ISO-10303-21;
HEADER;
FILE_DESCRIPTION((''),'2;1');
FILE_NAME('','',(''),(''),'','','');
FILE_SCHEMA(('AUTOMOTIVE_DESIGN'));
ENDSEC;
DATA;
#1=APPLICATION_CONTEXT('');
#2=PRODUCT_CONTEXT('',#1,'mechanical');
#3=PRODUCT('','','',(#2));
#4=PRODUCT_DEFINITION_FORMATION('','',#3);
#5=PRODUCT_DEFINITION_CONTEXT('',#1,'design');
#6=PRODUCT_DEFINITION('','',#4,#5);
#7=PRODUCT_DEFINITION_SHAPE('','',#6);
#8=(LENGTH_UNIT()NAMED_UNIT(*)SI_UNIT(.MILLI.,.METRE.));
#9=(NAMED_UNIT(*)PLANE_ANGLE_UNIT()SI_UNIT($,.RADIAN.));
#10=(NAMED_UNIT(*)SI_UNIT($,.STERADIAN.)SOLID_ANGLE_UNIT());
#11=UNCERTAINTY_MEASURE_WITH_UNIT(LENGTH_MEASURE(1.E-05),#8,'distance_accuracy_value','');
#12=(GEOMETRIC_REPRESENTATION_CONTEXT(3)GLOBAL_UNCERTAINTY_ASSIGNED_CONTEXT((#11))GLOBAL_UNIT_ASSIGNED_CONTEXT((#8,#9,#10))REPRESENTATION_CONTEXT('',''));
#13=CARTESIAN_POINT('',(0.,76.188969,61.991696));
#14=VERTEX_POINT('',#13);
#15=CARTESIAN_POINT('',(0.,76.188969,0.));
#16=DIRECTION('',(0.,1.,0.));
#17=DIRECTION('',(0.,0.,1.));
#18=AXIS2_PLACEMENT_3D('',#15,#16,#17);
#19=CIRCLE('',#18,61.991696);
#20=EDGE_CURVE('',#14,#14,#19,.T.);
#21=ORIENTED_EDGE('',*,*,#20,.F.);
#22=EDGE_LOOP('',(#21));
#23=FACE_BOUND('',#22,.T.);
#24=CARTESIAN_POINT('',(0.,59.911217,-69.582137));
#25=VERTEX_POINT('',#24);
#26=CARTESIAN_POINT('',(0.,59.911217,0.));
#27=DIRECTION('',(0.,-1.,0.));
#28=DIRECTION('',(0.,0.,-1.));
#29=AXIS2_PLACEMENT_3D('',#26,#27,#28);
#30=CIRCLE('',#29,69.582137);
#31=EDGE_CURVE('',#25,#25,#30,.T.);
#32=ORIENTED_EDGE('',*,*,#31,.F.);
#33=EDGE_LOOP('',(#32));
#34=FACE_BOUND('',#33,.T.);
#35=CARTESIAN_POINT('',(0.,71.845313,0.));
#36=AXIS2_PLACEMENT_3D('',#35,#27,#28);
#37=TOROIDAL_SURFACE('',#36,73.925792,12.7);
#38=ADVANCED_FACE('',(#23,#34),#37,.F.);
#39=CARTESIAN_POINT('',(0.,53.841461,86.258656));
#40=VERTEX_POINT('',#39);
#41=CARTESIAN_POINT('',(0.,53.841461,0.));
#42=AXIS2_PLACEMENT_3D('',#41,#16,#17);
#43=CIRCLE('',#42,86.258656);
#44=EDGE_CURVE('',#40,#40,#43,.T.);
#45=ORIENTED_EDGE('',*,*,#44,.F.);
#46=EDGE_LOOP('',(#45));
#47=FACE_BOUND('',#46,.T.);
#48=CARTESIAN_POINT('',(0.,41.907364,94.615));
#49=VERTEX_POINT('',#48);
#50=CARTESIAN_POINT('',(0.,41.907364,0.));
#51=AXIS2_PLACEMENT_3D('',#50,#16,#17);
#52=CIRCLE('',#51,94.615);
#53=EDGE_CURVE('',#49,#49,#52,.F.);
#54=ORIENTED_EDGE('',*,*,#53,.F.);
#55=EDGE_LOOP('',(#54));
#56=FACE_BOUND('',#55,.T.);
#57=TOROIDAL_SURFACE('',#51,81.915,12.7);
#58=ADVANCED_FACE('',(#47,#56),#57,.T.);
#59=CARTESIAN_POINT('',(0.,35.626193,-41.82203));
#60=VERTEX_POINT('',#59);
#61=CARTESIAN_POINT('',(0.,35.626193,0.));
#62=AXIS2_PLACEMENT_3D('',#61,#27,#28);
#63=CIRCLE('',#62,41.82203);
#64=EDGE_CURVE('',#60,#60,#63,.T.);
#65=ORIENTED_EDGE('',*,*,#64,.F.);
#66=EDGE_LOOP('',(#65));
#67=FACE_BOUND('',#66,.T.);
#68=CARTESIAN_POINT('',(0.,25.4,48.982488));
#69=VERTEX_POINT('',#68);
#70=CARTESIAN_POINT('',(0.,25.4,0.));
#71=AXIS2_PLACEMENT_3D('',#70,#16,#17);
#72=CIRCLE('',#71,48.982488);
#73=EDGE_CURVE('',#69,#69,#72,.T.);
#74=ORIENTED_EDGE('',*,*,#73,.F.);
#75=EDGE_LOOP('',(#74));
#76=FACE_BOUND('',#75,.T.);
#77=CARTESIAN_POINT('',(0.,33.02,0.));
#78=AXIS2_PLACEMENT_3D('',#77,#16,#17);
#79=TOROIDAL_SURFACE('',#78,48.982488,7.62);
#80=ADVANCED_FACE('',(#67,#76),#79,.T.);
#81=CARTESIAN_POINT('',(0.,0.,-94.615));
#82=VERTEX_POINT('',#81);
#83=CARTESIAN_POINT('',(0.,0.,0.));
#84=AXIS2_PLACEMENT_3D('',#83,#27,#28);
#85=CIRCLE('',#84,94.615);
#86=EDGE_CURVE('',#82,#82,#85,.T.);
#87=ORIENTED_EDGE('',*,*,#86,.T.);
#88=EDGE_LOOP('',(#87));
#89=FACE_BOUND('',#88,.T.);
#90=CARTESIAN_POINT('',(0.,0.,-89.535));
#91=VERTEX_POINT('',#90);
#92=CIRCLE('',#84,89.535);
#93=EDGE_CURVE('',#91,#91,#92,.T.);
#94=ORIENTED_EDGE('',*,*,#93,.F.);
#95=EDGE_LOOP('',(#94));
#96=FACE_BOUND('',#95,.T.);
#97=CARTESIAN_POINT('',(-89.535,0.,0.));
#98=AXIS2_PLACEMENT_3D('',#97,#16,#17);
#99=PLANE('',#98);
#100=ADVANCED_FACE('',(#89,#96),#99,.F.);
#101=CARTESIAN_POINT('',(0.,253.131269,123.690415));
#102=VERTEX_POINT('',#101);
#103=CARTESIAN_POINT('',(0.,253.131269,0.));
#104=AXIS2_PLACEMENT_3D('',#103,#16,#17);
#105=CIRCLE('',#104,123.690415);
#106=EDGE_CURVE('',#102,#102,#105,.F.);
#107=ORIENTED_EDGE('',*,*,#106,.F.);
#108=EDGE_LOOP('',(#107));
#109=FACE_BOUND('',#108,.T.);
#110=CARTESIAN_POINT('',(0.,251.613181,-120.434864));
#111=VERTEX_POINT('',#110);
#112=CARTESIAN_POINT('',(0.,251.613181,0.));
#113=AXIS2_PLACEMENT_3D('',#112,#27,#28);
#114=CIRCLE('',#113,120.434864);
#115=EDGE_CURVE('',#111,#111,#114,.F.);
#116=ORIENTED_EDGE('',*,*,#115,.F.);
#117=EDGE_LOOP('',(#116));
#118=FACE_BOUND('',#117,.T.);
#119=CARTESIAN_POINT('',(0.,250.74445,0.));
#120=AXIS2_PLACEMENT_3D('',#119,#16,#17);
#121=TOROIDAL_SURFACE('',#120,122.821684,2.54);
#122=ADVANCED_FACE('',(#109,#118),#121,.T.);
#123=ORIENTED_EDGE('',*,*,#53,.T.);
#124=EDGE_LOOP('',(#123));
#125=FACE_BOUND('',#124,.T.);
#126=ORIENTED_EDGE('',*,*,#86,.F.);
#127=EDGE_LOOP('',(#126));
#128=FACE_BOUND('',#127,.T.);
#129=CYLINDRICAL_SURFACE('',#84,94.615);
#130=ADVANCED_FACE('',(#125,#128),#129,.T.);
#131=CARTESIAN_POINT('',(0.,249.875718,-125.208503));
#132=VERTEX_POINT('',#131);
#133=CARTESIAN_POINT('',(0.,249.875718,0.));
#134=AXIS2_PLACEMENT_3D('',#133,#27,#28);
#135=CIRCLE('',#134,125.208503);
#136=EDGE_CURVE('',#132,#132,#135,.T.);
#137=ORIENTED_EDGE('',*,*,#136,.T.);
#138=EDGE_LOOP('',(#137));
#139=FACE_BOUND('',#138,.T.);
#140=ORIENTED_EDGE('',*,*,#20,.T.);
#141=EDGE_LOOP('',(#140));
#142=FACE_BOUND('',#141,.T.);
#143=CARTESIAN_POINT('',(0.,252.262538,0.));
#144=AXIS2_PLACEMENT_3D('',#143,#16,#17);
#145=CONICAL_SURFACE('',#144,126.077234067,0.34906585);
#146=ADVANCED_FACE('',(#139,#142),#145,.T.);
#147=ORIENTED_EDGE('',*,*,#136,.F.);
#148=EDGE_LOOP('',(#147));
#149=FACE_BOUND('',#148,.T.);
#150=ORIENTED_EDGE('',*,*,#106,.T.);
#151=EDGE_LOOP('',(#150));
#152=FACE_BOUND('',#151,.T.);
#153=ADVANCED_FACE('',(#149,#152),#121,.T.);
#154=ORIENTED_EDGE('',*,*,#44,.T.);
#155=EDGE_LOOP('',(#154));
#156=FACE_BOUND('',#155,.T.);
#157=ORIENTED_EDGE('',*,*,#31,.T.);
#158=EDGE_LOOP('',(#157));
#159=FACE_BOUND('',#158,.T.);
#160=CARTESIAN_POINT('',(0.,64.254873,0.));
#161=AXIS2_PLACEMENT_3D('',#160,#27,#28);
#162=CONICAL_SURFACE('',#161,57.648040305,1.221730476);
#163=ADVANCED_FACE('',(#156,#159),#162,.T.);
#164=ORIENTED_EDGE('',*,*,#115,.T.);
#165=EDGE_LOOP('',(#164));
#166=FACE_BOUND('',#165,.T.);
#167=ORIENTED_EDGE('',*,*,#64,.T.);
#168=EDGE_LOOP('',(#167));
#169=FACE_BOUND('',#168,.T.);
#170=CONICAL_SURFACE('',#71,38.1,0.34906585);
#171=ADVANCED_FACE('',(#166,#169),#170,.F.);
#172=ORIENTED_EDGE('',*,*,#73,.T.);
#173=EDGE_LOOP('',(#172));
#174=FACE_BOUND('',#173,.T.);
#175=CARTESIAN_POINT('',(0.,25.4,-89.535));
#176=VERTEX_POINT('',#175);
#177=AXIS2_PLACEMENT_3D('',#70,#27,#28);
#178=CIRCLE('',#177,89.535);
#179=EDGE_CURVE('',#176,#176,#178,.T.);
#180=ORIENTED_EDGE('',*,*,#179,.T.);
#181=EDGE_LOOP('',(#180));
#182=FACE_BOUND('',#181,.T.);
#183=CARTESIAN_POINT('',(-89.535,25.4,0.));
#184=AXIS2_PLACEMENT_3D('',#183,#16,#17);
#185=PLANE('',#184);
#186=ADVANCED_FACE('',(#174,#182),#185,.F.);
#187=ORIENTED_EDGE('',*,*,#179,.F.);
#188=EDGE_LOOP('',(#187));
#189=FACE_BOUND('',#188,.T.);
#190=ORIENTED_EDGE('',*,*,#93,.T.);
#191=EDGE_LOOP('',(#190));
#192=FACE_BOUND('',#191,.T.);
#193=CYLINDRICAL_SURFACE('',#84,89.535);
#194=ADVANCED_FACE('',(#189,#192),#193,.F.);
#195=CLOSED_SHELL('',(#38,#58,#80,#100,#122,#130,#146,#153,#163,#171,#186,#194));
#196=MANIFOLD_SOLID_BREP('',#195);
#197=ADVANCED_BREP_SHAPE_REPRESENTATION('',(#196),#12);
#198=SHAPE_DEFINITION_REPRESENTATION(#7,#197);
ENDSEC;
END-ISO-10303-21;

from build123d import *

# Parameters (mm, degrees)
FILLET1_R = 12.7
FILLET2_R = 7.62
FILLET3_R = 2.54


with BuildPart() as part:
    # Sketch1 → Revolve1 (revolve)
    with BuildSketch(Plane.XY, mode=Mode.PRIVATE) as revolve1_sk:
        Polygon((-94.615, 0), (-94.615, 50.8), (-57.648040305, 64.25487298), (-126.077234067, 252.262537672), (-121.303595553, 254), (-38.1, 25.4), (-89.535, 25.4), (-89.535, 0), align=None)
    revolve(revolve1_sk.sketch.rotate(Axis((0, 0, 0), (0, 1, 0)), 270), axis=Axis((0, 0, 0), (0, 1, 0)))

    # Fillet1
    fillet1_edges = [part.edges().sort_by_distance(p)[0] for p in [
        (0, 50.8, 94.615),
        (0, 64.25487298, 57.648040305),
    ]]
    fillet(fillet1_edges, radius=FILLET1_R)

    # Fillet2
    fillet2_edges = [part.edges().sort_by_distance(p)[0] for p in [
        (0, 25.4, 38.1),
    ]]
    fillet(fillet2_edges, radius=FILLET2_R)

    # Fillet3
    fillet3_edges = [part.edges().sort_by_distance(p)[0] for p in [
        (0, 252.262537672, 126.077234067),
        (0, 254, 121.303595553),
    ]]
    fillet(fillet3_edges, radius=FILLET3_R - 0.0001)  # a hair under: the kernel refuses the full size


solid = part.part
